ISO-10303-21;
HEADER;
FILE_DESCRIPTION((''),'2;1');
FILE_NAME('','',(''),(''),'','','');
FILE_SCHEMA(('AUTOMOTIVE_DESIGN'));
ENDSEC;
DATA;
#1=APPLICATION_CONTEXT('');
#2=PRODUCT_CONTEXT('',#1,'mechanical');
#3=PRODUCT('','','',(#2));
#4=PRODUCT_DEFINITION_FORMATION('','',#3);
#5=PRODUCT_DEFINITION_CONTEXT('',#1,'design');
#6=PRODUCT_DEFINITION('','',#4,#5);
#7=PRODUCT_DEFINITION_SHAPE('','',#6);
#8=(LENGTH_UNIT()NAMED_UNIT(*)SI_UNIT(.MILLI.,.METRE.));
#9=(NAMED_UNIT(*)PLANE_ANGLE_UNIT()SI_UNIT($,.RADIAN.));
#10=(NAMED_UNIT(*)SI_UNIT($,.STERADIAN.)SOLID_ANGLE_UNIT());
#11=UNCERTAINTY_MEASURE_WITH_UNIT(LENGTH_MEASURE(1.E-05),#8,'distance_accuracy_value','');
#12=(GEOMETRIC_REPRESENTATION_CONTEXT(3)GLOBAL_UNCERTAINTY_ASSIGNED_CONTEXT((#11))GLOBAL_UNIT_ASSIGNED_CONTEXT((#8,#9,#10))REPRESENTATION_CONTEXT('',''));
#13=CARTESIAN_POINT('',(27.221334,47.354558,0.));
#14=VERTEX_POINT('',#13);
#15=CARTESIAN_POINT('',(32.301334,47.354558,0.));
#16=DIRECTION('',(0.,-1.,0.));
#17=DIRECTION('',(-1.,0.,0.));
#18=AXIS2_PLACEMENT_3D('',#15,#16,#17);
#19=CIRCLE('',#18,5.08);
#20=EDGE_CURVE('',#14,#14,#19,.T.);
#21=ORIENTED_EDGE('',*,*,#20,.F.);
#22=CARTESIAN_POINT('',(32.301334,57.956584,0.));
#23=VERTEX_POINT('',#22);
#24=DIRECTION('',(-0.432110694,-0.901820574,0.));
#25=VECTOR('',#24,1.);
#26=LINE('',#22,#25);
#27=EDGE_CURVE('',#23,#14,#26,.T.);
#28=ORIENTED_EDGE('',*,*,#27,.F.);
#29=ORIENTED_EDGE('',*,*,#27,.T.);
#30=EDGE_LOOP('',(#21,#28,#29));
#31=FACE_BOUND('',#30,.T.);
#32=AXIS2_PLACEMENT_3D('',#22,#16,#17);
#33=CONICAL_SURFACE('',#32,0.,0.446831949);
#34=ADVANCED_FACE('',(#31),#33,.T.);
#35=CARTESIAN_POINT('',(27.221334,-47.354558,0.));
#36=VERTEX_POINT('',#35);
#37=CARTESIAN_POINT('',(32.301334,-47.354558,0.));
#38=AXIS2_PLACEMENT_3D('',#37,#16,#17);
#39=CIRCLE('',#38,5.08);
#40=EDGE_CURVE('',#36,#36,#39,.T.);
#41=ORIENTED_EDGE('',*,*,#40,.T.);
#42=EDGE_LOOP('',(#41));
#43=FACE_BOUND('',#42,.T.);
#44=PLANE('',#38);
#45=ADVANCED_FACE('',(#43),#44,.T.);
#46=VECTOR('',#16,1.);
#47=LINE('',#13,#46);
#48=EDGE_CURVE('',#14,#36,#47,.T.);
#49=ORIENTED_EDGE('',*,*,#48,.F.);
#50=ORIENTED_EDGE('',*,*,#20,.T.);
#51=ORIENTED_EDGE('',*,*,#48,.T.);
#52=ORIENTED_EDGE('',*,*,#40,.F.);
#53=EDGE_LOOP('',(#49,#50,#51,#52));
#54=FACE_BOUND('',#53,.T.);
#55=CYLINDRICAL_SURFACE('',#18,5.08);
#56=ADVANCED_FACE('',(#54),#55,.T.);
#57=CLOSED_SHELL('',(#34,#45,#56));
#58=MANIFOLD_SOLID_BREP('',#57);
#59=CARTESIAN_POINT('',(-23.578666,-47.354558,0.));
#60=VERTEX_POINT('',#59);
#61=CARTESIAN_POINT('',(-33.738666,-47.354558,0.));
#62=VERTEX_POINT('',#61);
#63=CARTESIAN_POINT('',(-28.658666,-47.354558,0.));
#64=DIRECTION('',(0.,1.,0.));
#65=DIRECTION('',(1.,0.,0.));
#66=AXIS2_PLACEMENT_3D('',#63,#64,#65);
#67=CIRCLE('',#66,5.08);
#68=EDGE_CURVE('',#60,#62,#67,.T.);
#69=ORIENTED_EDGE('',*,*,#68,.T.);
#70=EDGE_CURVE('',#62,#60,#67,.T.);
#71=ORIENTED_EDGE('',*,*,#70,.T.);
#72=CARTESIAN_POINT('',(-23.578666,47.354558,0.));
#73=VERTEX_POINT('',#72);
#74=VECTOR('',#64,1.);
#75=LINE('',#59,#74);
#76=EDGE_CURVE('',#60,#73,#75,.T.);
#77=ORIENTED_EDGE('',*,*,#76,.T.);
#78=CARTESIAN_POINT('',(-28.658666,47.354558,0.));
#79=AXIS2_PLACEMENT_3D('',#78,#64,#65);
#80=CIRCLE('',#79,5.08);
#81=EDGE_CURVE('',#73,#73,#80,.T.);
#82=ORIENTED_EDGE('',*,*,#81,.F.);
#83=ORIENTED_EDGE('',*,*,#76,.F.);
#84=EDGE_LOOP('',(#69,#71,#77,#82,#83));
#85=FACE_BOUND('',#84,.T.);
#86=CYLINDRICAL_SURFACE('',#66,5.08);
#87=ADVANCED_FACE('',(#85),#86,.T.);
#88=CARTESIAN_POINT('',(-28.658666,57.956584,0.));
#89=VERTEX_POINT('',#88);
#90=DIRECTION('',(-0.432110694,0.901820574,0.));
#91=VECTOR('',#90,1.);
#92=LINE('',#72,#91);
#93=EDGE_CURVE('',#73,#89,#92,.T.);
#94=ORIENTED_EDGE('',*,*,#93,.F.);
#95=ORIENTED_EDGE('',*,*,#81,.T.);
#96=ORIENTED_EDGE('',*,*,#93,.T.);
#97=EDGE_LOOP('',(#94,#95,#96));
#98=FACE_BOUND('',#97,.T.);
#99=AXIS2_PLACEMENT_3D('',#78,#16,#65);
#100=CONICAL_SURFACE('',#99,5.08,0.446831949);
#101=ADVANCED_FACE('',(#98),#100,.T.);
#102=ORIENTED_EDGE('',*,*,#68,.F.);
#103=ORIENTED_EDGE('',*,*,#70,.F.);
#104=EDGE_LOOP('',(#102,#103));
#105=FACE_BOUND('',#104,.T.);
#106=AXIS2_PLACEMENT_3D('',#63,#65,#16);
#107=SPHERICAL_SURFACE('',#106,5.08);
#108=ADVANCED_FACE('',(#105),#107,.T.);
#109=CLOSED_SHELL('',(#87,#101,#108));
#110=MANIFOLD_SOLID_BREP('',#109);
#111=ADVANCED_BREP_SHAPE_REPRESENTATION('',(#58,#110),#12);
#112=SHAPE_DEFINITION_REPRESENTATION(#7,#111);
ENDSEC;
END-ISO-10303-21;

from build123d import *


# Not quite as in the source:
# - the program builds the solid bodies; features that only make, move or delete a surface that nothing else refers to are left out


with BuildPart() as f1:
    # F0 (on Top) → F1 (revolve)
    with BuildSketch(Plane.XY):
        Polygon((-23.5786662051, -47.3545584765), (-23.5786662051, 47.3545584765), (-28.6586662051, 57.9565837979), (-28.6586662051, 47.3545584765), (-28.6586662051, -47.3545584765), align=None)
    revolve(axis=Axis((-28.6586662051, 0, 0), (0, 1, 0)))

    # F0 (on Top) → F4 (revolve)
    with BuildSketch(Plane.XY):
        with BuildLine():
            ThreePointArc((-33.7386662051, -47.3545584765), (-28.6586662051, -52.4345584765), (-23.5786662051, -47.3545584765))
            Line((-23.5786662051, -47.3545584765), (-28.6586662051, -47.3545584765))
            Line((-28.6586662051, -47.3545584765), (-33.7386662051, -47.3545584765))
        make_face()
    revolve(axis=Axis((-28.6586662051, -47.3545584765, 0), (1, 0, 0)))


with BuildPart() as f2:
    # F0 (on Top) → F2 (revolve)
    with BuildSketch(Plane.XY):
        Polygon((32.3013337949, 57.9565837979), (27.2213337949, 47.3545584765), (27.2213337949, -47.3545584765), (32.3013337949, -47.3545584765), (32.3013337949, 47.3545584765), align=None)
    revolve(axis=Axis((32.3013337949, 0, 0), (0, -1, 0)))


solid = Compound([f1.part, f2.part])
